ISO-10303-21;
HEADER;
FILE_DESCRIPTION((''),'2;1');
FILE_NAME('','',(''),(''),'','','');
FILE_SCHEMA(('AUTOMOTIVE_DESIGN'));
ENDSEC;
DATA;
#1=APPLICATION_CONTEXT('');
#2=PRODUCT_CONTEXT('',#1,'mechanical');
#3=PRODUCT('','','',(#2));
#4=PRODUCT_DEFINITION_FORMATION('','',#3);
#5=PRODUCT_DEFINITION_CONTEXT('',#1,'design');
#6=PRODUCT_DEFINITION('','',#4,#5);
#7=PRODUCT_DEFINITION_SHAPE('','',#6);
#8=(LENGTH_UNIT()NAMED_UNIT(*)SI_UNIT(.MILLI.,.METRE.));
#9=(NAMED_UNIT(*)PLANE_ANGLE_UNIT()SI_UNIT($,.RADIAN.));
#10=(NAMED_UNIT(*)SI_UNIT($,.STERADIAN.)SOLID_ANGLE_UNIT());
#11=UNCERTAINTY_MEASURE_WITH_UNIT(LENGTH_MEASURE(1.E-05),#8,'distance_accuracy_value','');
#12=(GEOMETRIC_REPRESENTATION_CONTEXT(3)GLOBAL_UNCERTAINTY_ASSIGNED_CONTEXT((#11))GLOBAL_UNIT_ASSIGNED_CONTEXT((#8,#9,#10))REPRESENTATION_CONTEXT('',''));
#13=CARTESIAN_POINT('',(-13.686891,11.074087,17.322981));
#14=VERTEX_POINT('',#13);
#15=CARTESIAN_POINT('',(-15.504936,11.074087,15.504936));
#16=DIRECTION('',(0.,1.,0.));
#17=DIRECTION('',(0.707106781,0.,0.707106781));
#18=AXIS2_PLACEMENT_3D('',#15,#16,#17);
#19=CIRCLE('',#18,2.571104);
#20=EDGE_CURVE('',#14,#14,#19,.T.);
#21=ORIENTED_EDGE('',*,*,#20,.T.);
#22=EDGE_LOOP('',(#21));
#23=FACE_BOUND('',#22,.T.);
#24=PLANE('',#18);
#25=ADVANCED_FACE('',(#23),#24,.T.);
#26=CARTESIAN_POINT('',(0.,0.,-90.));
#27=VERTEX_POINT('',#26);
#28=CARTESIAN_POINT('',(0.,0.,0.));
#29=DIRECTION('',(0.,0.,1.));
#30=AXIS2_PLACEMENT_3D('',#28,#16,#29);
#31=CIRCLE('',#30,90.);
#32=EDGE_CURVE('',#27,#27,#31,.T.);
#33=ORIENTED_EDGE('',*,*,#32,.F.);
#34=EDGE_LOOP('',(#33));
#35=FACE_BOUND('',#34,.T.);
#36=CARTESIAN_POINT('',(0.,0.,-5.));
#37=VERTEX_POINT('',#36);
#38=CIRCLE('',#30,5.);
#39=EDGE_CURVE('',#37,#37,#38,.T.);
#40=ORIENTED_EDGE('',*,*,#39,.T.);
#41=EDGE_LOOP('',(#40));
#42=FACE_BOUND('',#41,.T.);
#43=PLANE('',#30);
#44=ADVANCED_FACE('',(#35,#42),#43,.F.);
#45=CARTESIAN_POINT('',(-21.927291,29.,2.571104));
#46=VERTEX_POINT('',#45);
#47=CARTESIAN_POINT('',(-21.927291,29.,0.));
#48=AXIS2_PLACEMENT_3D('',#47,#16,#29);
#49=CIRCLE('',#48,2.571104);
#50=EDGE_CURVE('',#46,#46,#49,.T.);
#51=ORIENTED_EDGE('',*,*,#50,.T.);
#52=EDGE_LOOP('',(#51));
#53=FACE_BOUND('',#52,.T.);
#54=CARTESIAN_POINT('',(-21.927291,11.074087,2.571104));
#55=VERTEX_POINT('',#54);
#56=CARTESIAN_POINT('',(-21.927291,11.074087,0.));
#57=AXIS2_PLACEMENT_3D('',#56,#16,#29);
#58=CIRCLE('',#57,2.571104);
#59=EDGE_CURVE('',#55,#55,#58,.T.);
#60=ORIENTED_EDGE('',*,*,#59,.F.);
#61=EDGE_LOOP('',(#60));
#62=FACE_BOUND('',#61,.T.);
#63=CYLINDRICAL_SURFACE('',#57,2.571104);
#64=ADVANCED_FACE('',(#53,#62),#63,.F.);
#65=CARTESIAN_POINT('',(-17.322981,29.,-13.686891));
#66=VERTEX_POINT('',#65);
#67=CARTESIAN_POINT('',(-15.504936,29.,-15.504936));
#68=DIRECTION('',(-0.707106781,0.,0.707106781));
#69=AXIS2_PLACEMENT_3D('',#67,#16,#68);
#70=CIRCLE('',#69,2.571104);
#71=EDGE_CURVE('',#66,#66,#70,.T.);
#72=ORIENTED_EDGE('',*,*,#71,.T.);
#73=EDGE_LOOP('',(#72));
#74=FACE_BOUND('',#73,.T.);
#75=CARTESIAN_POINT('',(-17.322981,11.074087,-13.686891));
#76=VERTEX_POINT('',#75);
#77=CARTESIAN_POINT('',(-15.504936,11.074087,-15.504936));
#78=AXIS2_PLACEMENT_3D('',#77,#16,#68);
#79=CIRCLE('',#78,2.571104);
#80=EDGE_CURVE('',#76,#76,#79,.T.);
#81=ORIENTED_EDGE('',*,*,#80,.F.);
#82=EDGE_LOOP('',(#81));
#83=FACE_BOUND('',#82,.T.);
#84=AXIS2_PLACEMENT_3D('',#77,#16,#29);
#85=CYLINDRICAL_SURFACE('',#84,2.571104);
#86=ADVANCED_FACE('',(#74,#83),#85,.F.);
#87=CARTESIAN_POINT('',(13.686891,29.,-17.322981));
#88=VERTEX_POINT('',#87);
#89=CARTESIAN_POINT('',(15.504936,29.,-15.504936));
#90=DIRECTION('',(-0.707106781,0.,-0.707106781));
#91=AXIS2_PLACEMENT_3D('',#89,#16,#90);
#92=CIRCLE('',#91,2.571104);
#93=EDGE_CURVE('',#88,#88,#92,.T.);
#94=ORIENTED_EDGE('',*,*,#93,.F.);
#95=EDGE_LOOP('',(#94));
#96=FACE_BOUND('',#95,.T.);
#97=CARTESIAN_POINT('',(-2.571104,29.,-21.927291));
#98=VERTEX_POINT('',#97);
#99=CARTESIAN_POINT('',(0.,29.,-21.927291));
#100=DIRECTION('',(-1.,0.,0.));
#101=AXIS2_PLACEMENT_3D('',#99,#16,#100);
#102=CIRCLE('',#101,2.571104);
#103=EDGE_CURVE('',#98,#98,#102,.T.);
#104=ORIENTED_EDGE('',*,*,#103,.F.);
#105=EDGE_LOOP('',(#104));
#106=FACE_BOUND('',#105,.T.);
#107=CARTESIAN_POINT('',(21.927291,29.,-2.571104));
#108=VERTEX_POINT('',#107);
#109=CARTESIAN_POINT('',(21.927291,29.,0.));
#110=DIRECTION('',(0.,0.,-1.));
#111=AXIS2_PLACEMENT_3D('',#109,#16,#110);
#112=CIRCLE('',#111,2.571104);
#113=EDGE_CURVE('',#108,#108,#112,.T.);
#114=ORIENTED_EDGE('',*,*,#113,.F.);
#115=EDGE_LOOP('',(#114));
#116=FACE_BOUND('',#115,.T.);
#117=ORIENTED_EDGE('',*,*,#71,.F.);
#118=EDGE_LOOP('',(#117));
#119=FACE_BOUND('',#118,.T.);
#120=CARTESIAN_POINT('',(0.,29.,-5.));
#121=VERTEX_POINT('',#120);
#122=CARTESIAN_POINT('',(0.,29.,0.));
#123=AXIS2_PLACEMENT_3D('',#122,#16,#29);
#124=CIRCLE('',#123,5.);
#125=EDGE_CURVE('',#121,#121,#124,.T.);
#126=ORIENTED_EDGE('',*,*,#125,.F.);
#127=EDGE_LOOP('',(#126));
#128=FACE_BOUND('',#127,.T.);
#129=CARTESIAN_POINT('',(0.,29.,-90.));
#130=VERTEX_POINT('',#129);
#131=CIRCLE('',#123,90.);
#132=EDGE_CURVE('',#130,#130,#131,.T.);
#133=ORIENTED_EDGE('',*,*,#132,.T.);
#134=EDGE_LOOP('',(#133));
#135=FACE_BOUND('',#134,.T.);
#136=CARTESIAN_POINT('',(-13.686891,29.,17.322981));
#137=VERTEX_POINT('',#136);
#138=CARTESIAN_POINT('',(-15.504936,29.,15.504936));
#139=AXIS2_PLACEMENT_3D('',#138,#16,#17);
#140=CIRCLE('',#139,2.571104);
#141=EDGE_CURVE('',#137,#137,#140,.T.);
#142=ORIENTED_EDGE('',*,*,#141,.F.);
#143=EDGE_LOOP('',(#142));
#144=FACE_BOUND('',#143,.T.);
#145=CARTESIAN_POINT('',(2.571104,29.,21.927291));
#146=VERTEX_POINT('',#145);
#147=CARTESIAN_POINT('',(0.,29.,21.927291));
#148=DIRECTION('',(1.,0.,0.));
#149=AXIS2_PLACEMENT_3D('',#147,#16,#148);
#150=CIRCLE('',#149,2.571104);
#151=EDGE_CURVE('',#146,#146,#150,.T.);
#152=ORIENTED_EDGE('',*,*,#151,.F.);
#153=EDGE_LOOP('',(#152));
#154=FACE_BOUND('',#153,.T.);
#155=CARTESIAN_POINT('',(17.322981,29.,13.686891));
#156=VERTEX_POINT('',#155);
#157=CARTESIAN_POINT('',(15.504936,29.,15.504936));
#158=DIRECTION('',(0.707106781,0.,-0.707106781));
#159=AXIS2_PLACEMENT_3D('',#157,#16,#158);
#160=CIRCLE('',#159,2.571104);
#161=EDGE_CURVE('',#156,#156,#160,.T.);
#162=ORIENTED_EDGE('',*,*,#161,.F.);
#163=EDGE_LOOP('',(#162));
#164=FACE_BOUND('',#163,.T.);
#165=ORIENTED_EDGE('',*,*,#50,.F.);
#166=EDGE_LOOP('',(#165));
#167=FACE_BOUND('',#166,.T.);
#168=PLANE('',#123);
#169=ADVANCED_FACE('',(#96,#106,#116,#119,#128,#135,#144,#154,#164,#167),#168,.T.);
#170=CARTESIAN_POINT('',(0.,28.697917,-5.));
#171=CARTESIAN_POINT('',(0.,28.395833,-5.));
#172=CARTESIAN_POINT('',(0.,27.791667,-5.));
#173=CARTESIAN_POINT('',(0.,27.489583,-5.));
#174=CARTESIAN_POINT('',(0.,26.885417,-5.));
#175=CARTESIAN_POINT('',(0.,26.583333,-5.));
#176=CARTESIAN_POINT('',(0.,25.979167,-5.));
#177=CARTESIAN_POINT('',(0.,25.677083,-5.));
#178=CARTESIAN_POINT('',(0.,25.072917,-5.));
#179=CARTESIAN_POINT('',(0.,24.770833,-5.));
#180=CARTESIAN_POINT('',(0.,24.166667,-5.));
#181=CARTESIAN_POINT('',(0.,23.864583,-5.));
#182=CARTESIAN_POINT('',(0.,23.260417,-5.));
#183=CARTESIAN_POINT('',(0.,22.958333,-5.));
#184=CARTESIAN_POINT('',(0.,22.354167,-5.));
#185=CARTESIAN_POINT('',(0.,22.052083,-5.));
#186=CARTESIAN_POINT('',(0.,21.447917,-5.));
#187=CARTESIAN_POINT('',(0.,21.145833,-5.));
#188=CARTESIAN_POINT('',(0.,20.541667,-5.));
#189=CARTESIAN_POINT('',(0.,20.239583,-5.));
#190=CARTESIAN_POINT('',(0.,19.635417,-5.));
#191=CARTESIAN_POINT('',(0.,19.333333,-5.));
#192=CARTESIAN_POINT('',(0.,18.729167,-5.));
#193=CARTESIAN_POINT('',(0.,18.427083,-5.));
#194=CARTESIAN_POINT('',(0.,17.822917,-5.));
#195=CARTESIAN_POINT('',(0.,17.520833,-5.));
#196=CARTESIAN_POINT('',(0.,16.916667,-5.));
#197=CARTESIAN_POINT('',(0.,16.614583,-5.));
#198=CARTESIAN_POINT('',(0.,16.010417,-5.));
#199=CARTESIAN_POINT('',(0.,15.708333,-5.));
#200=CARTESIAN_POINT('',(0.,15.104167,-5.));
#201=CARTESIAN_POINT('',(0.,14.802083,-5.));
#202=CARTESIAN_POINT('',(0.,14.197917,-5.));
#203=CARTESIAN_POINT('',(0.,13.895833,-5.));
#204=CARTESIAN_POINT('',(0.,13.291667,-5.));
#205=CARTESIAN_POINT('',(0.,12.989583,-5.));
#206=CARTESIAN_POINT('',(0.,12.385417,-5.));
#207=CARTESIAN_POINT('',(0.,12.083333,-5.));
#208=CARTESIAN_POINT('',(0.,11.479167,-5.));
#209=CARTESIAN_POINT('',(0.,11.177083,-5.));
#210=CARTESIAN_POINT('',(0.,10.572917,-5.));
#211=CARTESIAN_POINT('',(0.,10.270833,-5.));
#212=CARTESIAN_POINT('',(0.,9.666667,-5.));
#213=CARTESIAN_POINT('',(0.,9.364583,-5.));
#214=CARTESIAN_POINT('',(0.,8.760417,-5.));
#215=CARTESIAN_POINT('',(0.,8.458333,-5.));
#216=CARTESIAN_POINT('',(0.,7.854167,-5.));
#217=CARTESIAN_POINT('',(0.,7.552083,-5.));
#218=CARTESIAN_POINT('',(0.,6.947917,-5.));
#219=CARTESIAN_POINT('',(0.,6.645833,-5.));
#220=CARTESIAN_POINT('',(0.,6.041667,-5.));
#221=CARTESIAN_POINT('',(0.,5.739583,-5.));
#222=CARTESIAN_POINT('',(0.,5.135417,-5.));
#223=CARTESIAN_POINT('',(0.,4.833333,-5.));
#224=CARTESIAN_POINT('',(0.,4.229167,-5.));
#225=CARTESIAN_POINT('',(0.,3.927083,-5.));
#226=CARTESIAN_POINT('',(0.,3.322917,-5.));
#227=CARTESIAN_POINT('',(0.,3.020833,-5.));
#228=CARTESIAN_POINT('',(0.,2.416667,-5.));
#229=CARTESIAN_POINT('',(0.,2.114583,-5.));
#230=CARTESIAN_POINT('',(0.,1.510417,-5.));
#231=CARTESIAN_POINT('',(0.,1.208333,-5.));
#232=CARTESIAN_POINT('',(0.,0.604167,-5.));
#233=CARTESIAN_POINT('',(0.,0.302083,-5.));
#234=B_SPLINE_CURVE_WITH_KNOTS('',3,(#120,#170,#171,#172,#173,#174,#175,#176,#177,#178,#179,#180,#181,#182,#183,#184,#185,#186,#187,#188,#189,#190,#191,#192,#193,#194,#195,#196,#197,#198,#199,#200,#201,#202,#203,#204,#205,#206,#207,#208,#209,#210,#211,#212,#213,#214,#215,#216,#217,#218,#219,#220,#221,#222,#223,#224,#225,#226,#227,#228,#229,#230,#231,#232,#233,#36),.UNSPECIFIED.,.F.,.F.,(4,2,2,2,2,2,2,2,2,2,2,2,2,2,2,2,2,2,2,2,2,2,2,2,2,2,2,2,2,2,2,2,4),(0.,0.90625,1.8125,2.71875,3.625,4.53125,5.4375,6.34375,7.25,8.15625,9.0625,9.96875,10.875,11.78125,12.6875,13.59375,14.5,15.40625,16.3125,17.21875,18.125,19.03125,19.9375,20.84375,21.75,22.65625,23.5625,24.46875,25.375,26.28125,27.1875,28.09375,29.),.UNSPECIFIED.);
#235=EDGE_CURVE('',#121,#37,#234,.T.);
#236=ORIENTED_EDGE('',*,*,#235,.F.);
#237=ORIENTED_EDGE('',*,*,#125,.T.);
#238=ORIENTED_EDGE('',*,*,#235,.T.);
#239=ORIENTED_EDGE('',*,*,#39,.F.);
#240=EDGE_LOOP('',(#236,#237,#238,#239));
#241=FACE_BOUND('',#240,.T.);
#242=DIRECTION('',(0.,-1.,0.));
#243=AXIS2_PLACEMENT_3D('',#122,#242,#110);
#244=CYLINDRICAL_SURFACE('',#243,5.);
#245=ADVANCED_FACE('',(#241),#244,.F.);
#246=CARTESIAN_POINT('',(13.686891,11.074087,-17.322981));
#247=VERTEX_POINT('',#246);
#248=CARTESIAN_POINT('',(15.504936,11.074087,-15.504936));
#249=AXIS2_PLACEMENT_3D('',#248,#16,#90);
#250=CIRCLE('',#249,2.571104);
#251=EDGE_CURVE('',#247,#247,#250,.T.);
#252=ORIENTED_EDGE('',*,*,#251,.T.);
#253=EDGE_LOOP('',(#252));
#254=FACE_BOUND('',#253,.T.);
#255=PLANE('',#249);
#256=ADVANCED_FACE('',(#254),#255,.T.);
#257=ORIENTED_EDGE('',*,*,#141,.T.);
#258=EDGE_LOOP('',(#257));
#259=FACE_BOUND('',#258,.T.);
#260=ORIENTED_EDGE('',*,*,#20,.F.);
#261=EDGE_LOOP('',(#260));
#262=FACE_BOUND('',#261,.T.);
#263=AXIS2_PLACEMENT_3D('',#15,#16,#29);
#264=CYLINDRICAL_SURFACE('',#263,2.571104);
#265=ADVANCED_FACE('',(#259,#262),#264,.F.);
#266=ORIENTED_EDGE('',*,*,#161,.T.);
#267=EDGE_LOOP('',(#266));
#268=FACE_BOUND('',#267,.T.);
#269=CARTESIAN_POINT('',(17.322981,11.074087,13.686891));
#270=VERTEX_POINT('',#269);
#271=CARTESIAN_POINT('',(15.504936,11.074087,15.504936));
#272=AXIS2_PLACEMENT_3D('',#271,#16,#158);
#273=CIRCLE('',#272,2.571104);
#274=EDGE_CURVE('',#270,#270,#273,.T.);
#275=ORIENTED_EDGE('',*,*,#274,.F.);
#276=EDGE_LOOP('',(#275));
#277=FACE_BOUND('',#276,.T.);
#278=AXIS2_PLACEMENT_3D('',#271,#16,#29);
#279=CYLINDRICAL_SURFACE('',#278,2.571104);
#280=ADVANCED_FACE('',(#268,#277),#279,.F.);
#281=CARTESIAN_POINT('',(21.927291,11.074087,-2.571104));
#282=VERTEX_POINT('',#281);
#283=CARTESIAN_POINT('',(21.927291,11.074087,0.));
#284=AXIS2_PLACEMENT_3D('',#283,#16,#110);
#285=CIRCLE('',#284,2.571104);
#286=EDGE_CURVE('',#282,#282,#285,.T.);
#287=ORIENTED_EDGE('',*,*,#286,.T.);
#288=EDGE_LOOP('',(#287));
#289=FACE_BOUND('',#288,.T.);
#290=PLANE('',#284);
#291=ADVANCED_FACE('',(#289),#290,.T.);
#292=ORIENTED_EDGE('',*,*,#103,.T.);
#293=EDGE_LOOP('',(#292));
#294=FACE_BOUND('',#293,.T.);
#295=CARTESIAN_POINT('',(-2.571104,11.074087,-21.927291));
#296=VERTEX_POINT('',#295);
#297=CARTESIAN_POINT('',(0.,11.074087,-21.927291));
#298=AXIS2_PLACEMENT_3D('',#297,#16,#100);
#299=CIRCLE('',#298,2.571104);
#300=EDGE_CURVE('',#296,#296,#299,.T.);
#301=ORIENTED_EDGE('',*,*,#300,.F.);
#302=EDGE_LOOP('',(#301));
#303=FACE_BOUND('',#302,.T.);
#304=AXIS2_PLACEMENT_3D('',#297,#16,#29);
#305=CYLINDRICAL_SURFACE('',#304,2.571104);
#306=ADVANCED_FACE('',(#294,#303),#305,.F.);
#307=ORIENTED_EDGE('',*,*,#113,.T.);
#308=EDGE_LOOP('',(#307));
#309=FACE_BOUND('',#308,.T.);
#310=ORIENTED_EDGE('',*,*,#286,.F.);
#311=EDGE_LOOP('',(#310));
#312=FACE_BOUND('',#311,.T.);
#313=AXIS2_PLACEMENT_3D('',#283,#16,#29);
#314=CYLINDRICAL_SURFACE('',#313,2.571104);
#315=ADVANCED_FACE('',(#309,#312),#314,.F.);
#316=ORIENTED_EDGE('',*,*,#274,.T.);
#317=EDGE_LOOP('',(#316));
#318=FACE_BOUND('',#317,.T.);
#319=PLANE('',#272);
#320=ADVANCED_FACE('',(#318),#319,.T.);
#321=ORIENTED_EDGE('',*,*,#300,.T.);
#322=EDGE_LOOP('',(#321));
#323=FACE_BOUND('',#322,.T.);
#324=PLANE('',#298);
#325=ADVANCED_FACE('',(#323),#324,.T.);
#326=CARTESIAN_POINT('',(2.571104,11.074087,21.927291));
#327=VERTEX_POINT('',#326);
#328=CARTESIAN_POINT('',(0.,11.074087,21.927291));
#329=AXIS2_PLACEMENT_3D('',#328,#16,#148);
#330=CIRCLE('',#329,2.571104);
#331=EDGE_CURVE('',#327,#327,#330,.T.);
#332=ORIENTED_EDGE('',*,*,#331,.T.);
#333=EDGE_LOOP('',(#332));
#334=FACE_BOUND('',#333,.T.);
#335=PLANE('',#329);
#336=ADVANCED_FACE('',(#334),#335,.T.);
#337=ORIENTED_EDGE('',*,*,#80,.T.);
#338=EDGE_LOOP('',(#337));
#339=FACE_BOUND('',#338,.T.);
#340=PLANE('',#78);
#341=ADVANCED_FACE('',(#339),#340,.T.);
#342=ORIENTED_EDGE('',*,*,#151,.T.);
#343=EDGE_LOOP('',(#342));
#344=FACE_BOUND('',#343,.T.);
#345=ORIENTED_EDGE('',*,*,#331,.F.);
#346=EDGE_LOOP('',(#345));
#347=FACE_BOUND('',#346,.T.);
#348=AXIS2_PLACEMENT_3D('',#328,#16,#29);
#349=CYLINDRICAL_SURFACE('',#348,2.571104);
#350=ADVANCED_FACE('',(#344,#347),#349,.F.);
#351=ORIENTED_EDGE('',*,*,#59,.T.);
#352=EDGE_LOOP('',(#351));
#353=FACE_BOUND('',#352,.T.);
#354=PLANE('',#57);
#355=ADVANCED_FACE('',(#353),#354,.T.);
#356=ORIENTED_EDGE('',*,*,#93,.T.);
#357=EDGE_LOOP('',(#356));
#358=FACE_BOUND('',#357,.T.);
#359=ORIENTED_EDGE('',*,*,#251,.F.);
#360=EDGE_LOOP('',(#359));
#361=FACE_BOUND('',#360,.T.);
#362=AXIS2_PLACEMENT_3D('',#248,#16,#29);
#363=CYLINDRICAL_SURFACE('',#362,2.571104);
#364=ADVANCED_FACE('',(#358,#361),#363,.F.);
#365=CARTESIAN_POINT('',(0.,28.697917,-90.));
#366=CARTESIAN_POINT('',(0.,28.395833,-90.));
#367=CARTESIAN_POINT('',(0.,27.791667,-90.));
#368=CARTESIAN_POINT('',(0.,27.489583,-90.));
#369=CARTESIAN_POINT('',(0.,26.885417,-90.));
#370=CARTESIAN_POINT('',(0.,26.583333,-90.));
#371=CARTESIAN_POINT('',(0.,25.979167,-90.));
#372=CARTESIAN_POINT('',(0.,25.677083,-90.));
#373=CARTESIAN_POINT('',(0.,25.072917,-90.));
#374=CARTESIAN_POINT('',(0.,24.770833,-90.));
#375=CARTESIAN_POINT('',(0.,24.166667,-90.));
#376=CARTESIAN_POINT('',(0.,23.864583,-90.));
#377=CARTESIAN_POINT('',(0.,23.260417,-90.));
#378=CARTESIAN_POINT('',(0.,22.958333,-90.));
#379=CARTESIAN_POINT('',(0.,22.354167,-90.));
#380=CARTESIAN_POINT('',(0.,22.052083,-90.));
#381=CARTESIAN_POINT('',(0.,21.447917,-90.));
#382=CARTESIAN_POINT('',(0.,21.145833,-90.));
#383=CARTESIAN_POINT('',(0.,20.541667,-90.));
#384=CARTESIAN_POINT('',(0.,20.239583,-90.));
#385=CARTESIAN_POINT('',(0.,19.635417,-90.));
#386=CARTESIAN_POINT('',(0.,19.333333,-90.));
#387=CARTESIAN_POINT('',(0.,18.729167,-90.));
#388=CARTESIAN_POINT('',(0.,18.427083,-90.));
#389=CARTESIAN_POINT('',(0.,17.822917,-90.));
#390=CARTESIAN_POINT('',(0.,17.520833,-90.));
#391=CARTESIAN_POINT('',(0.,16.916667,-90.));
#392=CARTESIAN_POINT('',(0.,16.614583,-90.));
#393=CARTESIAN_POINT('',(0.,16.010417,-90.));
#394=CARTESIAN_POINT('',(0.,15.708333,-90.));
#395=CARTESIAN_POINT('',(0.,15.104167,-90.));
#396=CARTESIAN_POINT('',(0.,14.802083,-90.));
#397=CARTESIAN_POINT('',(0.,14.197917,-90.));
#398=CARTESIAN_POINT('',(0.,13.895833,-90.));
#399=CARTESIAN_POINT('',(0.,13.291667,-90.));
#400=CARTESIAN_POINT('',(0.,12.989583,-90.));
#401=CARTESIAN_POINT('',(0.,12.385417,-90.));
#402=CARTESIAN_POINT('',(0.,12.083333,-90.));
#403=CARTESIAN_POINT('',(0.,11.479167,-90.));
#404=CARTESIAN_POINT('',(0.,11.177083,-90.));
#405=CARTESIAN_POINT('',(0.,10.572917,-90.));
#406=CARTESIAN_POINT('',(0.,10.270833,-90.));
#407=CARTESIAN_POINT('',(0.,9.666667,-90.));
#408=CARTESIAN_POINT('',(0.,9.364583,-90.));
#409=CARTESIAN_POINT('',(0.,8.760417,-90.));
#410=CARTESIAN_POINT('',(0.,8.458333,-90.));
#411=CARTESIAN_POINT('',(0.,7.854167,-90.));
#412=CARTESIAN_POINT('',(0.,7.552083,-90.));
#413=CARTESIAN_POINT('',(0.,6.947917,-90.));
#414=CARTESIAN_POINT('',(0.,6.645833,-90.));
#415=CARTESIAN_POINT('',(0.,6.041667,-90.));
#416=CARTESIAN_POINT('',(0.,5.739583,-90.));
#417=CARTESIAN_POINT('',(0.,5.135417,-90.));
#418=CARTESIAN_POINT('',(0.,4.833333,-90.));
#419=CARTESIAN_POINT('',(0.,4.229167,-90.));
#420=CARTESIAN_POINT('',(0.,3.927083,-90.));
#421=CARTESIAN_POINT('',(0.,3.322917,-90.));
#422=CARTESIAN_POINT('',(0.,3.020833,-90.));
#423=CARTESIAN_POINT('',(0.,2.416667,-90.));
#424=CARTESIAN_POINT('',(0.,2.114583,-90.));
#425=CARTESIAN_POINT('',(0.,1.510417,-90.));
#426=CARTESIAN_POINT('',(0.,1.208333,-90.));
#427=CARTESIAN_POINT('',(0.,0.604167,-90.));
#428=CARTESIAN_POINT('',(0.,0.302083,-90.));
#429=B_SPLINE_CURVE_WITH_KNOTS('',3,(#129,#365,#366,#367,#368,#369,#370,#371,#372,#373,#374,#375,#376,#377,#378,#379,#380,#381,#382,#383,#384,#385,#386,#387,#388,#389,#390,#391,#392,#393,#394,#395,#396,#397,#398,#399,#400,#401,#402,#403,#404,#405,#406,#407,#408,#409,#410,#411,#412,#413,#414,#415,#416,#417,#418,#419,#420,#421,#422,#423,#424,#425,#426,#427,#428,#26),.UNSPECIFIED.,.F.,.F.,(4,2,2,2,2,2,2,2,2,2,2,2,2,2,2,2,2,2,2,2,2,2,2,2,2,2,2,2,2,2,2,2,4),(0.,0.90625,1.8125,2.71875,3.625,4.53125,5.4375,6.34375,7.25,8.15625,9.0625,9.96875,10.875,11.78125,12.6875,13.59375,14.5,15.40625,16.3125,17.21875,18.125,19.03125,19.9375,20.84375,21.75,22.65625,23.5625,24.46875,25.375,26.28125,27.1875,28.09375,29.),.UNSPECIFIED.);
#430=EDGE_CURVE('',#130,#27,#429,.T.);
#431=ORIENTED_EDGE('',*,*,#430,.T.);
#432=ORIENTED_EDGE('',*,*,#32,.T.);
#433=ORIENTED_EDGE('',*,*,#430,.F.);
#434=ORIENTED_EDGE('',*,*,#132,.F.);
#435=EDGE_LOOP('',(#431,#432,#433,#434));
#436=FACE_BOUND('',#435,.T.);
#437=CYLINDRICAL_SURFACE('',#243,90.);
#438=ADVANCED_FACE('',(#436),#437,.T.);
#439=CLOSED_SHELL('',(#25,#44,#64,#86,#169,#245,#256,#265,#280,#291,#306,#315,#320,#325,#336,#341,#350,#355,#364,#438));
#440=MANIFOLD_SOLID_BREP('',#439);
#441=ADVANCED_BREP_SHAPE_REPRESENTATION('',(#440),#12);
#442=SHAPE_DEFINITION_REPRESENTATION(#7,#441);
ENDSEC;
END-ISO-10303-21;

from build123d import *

# Parameters (mm, degrees)
SKETCH1_R           = 90
BOSS_EXTRUDE1_DEPTH = 29
SKETCH2_R           = 5
CUT_EXTRUDE1_DEPTH  = 131.541181242
SKETCH3_R           = 2.571104128
CUT_EXTRUDE2_DEPTH  = 17.925912871
CIRPATTERN1_COUNT   = 8


with BuildPart() as part:
    # Sketch1 → Boss-Extrude1 (new body)
    with BuildSketch(Plane(origin=(0, 0, 0), x_dir=(1, 0, 0), z_dir=(0, 1, 0))):
        Circle(SKETCH1_R)
    extrude(amount=BOSS_EXTRUDE1_DEPTH)

    # Sketch2 → Cut-Extrude1 (cut, through all)
    with BuildSketch(Plane(origin=(0, 0, 0), x_dir=(1, 0, 0), z_dir=(0, 1, 0))):
        Circle(SKETCH2_R)
    extrude(amount=CUT_EXTRUDE1_DEPTH, mode=Mode.SUBTRACT)

    # Sketch3 → Cut-Extrude2 (cut)
    with BuildSketch(Plane(origin=(0, 29, 0), x_dir=(1, 0, 0), z_dir=(0, 1, 0))):
        with Locations((-21.927290518, 0)):
            Circle(SKETCH3_R)
    cut_extrude2 = extrude(amount=-CUT_EXTRUDE2_DEPTH, mode=Mode.SUBTRACT)

    # CirPattern1: Cut-Extrude2 ×8 about axis
    cirpattern1_axis = Axis((0, 0, 0), (0, 1, 0))
    for i in range(1, CIRPATTERN1_COUNT):
        add(cut_extrude2.rotate(cirpattern1_axis, i * 360 / CIRPATTERN1_COUNT), mode=Mode.SUBTRACT)


solid = part.part
